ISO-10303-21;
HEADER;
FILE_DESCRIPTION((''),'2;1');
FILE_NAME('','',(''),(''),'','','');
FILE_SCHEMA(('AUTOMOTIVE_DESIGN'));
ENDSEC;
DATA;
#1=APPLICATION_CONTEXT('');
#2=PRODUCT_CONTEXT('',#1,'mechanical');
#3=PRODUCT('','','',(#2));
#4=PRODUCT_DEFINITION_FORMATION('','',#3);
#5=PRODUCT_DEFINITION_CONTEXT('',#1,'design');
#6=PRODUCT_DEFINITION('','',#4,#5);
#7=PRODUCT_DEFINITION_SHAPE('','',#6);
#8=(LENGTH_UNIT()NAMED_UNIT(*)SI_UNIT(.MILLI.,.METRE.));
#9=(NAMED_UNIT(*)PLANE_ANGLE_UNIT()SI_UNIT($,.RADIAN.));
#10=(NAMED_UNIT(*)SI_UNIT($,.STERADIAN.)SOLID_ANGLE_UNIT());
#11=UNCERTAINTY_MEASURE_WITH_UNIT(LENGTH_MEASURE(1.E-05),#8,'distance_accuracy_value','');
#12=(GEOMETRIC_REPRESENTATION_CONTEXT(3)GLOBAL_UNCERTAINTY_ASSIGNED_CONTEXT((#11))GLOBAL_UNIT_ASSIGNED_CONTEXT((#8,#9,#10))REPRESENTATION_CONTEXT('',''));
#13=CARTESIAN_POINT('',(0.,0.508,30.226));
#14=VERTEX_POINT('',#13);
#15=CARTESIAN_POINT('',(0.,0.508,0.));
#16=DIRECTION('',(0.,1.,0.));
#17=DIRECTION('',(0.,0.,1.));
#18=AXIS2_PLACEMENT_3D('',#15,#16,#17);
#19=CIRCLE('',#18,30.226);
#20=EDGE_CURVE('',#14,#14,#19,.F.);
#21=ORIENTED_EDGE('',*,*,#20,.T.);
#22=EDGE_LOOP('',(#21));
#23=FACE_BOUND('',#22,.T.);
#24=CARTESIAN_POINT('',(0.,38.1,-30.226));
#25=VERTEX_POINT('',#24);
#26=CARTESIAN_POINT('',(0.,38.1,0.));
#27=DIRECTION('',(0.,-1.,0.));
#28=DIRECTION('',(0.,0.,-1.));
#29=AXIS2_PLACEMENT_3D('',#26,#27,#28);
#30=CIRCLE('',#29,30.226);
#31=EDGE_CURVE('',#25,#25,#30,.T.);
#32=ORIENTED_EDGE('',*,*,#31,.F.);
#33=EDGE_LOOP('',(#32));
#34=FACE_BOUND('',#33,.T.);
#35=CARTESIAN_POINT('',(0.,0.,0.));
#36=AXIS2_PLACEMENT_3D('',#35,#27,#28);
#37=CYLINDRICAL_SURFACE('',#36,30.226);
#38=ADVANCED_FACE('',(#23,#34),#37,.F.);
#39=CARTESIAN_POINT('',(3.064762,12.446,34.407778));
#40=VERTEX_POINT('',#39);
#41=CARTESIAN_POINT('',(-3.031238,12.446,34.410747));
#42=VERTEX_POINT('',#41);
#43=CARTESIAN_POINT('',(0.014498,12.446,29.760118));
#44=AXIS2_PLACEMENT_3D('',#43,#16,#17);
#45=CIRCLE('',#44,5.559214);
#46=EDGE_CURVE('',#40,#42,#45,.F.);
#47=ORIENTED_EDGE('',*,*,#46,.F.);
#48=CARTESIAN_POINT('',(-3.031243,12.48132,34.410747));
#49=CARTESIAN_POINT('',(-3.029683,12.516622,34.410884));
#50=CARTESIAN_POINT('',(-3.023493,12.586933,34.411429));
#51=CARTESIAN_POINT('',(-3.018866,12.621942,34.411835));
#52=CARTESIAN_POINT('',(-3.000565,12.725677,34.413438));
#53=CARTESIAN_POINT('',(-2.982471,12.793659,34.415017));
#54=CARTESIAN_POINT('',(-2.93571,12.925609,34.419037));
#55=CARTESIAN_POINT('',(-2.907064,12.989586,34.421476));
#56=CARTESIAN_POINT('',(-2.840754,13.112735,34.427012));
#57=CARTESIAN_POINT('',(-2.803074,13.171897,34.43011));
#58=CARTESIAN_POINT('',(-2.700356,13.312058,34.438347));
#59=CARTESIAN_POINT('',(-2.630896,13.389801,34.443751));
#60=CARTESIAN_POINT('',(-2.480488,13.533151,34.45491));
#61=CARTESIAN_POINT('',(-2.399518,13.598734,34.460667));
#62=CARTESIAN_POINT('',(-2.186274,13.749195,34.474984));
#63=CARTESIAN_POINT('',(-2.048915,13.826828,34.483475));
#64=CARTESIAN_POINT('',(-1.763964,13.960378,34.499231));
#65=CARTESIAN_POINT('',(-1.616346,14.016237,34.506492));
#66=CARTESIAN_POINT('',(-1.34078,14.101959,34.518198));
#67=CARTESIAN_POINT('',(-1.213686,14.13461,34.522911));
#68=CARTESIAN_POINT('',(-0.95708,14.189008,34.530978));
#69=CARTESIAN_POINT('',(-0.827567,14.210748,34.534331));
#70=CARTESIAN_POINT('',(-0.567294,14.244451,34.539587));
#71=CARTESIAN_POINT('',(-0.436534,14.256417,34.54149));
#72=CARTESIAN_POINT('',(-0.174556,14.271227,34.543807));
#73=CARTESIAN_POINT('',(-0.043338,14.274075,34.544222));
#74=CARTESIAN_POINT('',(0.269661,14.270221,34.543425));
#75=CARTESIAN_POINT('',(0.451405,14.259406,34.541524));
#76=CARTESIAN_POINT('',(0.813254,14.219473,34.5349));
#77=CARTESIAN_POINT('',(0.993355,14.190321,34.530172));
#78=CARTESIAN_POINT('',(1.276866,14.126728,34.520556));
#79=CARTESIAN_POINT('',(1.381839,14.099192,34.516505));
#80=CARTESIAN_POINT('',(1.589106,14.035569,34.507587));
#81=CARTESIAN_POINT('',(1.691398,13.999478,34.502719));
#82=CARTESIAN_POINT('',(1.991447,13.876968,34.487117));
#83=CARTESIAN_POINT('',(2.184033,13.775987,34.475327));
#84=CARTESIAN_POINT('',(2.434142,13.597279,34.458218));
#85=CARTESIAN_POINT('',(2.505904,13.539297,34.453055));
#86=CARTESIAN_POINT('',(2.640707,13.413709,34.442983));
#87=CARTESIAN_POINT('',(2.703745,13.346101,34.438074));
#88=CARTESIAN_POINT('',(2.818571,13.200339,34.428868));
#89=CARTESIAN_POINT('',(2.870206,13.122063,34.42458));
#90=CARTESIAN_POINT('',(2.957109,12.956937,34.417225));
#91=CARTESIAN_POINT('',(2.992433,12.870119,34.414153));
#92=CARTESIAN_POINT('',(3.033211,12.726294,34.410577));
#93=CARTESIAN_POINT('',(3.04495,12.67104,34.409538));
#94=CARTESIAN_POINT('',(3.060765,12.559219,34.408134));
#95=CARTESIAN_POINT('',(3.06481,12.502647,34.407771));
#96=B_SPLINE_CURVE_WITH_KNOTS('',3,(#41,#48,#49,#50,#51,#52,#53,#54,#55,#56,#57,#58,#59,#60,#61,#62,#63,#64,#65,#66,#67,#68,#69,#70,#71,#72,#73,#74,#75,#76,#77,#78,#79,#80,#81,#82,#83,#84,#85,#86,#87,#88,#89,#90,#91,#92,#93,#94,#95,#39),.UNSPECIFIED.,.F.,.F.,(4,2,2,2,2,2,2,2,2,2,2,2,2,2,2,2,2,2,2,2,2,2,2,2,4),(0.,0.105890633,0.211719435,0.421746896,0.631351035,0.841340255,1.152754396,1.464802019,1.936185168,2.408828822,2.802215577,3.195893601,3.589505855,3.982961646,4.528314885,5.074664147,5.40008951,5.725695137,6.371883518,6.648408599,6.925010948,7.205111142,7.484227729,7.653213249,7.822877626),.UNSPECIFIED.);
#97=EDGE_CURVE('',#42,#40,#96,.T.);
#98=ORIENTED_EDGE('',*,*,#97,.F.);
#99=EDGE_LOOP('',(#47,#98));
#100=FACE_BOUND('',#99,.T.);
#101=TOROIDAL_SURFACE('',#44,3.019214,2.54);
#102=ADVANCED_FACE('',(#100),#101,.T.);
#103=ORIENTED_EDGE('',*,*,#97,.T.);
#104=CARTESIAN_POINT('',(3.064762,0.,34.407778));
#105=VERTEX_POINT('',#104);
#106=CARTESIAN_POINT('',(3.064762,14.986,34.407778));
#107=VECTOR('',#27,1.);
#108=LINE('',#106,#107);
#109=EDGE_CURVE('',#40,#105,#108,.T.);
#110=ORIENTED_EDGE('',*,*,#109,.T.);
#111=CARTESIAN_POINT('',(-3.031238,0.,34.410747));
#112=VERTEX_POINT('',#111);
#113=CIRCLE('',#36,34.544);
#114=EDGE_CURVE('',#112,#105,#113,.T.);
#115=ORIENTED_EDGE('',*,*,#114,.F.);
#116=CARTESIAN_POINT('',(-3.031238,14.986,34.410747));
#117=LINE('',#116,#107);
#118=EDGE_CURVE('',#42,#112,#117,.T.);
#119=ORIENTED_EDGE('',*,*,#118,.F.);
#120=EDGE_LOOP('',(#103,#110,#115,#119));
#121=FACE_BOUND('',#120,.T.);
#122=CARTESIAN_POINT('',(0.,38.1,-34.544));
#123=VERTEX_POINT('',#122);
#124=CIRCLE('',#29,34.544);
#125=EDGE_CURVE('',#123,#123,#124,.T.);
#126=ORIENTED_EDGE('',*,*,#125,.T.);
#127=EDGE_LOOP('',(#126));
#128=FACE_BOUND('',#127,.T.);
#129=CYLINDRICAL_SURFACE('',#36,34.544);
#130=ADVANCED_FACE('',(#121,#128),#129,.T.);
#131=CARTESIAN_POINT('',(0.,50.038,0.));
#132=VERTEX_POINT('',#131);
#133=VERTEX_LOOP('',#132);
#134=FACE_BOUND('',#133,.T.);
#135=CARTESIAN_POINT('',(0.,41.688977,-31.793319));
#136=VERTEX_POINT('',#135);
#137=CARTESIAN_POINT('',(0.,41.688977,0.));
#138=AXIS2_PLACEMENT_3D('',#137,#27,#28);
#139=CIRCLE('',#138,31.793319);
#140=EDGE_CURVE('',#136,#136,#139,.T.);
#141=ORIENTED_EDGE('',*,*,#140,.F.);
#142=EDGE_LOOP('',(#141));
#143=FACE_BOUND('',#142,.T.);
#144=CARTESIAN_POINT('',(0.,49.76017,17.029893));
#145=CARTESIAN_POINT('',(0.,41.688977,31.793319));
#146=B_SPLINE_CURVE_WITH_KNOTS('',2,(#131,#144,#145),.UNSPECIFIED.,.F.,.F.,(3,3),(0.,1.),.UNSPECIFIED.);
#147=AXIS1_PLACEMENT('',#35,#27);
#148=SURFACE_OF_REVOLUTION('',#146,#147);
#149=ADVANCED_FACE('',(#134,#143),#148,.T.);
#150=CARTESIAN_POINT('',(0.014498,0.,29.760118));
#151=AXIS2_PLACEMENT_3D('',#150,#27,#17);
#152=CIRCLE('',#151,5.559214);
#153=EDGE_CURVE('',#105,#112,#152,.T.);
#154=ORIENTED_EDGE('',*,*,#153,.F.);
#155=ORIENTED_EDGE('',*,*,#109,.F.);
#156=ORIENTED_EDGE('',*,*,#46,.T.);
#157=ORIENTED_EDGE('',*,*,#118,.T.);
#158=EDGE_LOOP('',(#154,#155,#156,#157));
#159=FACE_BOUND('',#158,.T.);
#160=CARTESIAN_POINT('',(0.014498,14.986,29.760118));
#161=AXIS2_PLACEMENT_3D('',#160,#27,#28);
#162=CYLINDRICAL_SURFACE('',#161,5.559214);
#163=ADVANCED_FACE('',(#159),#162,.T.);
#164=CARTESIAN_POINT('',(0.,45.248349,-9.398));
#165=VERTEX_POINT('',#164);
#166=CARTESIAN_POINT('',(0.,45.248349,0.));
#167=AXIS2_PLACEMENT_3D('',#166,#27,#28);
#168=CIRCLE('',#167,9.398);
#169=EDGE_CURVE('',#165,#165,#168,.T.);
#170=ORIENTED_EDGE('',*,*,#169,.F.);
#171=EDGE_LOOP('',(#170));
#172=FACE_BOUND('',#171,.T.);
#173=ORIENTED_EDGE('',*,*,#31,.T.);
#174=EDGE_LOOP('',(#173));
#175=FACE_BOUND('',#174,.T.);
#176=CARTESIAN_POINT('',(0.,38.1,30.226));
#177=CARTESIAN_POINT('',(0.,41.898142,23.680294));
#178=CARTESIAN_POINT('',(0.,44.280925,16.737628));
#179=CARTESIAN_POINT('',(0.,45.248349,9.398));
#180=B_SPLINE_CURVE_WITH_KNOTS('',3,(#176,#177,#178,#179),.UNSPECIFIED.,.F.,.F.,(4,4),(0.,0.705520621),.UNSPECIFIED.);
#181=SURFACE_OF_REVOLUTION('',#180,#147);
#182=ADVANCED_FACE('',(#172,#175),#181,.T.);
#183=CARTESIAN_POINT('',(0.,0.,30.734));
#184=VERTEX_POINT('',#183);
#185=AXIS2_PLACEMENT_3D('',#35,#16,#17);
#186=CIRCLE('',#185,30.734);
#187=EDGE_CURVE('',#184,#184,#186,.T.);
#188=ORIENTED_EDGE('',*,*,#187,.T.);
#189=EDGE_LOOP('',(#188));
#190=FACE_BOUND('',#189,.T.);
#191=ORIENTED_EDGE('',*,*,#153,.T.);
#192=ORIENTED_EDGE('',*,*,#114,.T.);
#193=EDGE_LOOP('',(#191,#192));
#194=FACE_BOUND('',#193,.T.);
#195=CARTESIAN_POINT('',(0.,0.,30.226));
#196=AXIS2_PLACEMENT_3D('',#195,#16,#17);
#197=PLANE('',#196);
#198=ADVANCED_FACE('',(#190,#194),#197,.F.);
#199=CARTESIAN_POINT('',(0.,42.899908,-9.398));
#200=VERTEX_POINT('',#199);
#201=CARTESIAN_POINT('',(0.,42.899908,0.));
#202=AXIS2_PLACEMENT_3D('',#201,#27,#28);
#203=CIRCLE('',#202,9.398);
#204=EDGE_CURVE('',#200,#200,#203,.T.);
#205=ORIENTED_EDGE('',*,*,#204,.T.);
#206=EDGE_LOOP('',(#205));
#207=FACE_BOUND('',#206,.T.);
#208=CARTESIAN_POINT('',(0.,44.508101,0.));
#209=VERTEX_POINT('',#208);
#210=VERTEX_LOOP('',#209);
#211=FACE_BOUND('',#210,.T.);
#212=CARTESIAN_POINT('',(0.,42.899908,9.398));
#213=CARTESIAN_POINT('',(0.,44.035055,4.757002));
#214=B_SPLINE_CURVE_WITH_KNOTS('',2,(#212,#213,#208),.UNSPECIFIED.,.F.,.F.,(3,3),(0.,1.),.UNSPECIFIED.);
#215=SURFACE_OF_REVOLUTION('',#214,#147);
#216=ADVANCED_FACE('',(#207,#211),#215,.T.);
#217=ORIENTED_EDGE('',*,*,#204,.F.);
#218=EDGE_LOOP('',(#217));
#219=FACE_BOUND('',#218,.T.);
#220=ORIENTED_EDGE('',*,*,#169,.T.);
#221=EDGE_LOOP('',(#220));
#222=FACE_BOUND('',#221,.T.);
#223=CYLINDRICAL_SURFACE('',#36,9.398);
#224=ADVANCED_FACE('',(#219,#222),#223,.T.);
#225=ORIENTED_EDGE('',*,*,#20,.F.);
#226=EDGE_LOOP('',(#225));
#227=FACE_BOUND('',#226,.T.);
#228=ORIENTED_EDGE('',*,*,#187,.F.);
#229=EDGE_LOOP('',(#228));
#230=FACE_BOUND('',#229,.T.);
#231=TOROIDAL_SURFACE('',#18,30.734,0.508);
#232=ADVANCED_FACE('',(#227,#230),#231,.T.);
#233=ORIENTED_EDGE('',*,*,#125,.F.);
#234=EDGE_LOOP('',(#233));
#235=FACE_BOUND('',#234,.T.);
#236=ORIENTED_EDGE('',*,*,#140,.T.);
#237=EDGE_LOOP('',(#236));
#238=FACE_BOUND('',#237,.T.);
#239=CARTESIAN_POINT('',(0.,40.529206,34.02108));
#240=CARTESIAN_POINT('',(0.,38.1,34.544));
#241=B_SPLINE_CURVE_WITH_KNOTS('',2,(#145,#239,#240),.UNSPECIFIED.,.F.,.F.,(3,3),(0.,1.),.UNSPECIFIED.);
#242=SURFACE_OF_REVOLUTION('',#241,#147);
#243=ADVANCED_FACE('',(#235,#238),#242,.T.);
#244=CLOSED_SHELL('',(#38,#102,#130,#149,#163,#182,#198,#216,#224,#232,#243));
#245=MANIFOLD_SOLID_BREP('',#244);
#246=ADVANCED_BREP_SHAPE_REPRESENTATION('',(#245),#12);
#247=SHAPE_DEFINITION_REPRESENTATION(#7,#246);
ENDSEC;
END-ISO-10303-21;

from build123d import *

# Parameters (mm, degrees)
BOSS_EXTRUDE1_DEPTH = 14.986
FILLET1_R           = 2.54
FILLET2_R           = 0.508


with BuildPart() as part:
    # Sketch1 → Revolve1 (revolve)
    with BuildSketch(Plane(origin=(0, 0, 0), x_dir=(0, 0, -1), z_dir=(1, 0, 0)), mode=Mode.PRIVATE) as revolve1_sk:
        with BuildLine():
            Line((-30.226, 0), (-34.544, 0))
            Line((-34.544, 0), (-34.544, 38.1))
            add(Edge.make_bspline(
                [(-34.544, 38.1), (-34.021080338, 40.529206207), (-31.793319074, 41.68897665)],
                knots=[0, 0, 0, 1, 1, 1], degree=2))
            add(Edge.make_bspline(
                [(-31.793319074, 41.68897665), (-17.029892538, 49.760170098), (0, 50.038)],
                knots=[0, 0, 0, 1, 1, 1], degree=2))
            Line((0, 50.038), (0, 44.508100575))
            add(Edge.make_bspline(
                [(-9.398, 42.89990788), (-4.757001601, 44.03505485), (0, 44.508100575)],
                knots=[0, 0, 0, 1, 1, 1], degree=2))
            Line((-9.398, 42.89990788), (-9.398, 45.248349281))
            add(Edge.make_bspline(
                [(-30.226, 38.1), (-23.680294376, 41.89814151), (-16.73762771, 44.280924604), (-9.398, 45.248349281)],
                knots=[0, 0, 0, 0, 0.705520621, 0.705520621, 0.705520621, 0.705520621], degree=3))
            Line((-30.226, 38.1), (-30.226, 0))
        make_face()
    revolve(revolve1_sk.sketch.rotate(Axis((0, 0, 0), (0, 1, 0)), 180), axis=Axis((0, 0, 0), (0, 1, 0)))

    # Sketch2 → Boss-Extrude1 (add)
    with BuildSketch(Plane.XZ):
        with BuildLine():
            ThreePointArc((-3.031237567, 34.410747374), (0.017205772, 35.31933097), (3.064762433, 34.407777714))
            add(Edge.make_bspline(
                [(-3.031237567, 34.410747374), (0.016426392, 33.804246246), (3.064762433, 34.407777714)],
                knots=[0, 0, 0, 1, 1, 1], degree=2))
        make_face()
    extrude(amount=-BOSS_EXTRUDE1_DEPTH)

    # Fillet1
    # the kernel refuses this fillet: 2.54 mm, written as the material it takes off along each edge
    with BuildSketch(Plane(origin=(0.014497608, 14.986, 29.760117923), x_dir=(-0.9885428097510283, 0, -0.15094076086181066), z_dir=(0.15094076086181066, 0, -0.9885428097510283))) as fillet1_piece_1_section:
        with BuildLine():
            CenterArc((5.559213707 - FILLET1_R, -FILLET1_R), FILLET1_R, 0, 90)
            Line((5.559213707 - FILLET1_R, 0), (5.559213707 - FILLET1_R, FILLET1_R * 0.02))
            Line((5.559213707 - FILLET1_R, FILLET1_R * 0.02), (5.559213707 + FILLET1_R * 0.02, FILLET1_R * 0.02))
            Line((5.559213707 + FILLET1_R * 0.02, FILLET1_R * 0.02), (5.559213707 + FILLET1_R * 0.02, -FILLET1_R))
            Line((5.559213707 + FILLET1_R * 0.02, -FILLET1_R), (5.559213707, -FILLET1_R))
        make_face()
    fillet1_piece_1 = revolve(axis=Axis((0.014497608, 14.986, 29.760117923), (0, 1, 0)), revolution_arc=197.418721047, mode=Mode.PRIVATE)
    fillet1_piece_1 = fillet1_piece_1 - Plane(origin=(0, 14.161727142, 0), x_dir=(0, 0, -1), z_dir=(0, 1, 0)) * Cylinder(34.544, 23, mode=Mode.PRIVATE)
    add(fillet1_piece_1, mode=Mode.SUBTRACT)

    # Fillet2
    fillet2_edges = [part.edges().sort_by_distance(p)[0] for p in [
        (0, 0, 30.226),
    ]]
    fillet(fillet2_edges, radius=FILLET2_R)


solid = part.part
